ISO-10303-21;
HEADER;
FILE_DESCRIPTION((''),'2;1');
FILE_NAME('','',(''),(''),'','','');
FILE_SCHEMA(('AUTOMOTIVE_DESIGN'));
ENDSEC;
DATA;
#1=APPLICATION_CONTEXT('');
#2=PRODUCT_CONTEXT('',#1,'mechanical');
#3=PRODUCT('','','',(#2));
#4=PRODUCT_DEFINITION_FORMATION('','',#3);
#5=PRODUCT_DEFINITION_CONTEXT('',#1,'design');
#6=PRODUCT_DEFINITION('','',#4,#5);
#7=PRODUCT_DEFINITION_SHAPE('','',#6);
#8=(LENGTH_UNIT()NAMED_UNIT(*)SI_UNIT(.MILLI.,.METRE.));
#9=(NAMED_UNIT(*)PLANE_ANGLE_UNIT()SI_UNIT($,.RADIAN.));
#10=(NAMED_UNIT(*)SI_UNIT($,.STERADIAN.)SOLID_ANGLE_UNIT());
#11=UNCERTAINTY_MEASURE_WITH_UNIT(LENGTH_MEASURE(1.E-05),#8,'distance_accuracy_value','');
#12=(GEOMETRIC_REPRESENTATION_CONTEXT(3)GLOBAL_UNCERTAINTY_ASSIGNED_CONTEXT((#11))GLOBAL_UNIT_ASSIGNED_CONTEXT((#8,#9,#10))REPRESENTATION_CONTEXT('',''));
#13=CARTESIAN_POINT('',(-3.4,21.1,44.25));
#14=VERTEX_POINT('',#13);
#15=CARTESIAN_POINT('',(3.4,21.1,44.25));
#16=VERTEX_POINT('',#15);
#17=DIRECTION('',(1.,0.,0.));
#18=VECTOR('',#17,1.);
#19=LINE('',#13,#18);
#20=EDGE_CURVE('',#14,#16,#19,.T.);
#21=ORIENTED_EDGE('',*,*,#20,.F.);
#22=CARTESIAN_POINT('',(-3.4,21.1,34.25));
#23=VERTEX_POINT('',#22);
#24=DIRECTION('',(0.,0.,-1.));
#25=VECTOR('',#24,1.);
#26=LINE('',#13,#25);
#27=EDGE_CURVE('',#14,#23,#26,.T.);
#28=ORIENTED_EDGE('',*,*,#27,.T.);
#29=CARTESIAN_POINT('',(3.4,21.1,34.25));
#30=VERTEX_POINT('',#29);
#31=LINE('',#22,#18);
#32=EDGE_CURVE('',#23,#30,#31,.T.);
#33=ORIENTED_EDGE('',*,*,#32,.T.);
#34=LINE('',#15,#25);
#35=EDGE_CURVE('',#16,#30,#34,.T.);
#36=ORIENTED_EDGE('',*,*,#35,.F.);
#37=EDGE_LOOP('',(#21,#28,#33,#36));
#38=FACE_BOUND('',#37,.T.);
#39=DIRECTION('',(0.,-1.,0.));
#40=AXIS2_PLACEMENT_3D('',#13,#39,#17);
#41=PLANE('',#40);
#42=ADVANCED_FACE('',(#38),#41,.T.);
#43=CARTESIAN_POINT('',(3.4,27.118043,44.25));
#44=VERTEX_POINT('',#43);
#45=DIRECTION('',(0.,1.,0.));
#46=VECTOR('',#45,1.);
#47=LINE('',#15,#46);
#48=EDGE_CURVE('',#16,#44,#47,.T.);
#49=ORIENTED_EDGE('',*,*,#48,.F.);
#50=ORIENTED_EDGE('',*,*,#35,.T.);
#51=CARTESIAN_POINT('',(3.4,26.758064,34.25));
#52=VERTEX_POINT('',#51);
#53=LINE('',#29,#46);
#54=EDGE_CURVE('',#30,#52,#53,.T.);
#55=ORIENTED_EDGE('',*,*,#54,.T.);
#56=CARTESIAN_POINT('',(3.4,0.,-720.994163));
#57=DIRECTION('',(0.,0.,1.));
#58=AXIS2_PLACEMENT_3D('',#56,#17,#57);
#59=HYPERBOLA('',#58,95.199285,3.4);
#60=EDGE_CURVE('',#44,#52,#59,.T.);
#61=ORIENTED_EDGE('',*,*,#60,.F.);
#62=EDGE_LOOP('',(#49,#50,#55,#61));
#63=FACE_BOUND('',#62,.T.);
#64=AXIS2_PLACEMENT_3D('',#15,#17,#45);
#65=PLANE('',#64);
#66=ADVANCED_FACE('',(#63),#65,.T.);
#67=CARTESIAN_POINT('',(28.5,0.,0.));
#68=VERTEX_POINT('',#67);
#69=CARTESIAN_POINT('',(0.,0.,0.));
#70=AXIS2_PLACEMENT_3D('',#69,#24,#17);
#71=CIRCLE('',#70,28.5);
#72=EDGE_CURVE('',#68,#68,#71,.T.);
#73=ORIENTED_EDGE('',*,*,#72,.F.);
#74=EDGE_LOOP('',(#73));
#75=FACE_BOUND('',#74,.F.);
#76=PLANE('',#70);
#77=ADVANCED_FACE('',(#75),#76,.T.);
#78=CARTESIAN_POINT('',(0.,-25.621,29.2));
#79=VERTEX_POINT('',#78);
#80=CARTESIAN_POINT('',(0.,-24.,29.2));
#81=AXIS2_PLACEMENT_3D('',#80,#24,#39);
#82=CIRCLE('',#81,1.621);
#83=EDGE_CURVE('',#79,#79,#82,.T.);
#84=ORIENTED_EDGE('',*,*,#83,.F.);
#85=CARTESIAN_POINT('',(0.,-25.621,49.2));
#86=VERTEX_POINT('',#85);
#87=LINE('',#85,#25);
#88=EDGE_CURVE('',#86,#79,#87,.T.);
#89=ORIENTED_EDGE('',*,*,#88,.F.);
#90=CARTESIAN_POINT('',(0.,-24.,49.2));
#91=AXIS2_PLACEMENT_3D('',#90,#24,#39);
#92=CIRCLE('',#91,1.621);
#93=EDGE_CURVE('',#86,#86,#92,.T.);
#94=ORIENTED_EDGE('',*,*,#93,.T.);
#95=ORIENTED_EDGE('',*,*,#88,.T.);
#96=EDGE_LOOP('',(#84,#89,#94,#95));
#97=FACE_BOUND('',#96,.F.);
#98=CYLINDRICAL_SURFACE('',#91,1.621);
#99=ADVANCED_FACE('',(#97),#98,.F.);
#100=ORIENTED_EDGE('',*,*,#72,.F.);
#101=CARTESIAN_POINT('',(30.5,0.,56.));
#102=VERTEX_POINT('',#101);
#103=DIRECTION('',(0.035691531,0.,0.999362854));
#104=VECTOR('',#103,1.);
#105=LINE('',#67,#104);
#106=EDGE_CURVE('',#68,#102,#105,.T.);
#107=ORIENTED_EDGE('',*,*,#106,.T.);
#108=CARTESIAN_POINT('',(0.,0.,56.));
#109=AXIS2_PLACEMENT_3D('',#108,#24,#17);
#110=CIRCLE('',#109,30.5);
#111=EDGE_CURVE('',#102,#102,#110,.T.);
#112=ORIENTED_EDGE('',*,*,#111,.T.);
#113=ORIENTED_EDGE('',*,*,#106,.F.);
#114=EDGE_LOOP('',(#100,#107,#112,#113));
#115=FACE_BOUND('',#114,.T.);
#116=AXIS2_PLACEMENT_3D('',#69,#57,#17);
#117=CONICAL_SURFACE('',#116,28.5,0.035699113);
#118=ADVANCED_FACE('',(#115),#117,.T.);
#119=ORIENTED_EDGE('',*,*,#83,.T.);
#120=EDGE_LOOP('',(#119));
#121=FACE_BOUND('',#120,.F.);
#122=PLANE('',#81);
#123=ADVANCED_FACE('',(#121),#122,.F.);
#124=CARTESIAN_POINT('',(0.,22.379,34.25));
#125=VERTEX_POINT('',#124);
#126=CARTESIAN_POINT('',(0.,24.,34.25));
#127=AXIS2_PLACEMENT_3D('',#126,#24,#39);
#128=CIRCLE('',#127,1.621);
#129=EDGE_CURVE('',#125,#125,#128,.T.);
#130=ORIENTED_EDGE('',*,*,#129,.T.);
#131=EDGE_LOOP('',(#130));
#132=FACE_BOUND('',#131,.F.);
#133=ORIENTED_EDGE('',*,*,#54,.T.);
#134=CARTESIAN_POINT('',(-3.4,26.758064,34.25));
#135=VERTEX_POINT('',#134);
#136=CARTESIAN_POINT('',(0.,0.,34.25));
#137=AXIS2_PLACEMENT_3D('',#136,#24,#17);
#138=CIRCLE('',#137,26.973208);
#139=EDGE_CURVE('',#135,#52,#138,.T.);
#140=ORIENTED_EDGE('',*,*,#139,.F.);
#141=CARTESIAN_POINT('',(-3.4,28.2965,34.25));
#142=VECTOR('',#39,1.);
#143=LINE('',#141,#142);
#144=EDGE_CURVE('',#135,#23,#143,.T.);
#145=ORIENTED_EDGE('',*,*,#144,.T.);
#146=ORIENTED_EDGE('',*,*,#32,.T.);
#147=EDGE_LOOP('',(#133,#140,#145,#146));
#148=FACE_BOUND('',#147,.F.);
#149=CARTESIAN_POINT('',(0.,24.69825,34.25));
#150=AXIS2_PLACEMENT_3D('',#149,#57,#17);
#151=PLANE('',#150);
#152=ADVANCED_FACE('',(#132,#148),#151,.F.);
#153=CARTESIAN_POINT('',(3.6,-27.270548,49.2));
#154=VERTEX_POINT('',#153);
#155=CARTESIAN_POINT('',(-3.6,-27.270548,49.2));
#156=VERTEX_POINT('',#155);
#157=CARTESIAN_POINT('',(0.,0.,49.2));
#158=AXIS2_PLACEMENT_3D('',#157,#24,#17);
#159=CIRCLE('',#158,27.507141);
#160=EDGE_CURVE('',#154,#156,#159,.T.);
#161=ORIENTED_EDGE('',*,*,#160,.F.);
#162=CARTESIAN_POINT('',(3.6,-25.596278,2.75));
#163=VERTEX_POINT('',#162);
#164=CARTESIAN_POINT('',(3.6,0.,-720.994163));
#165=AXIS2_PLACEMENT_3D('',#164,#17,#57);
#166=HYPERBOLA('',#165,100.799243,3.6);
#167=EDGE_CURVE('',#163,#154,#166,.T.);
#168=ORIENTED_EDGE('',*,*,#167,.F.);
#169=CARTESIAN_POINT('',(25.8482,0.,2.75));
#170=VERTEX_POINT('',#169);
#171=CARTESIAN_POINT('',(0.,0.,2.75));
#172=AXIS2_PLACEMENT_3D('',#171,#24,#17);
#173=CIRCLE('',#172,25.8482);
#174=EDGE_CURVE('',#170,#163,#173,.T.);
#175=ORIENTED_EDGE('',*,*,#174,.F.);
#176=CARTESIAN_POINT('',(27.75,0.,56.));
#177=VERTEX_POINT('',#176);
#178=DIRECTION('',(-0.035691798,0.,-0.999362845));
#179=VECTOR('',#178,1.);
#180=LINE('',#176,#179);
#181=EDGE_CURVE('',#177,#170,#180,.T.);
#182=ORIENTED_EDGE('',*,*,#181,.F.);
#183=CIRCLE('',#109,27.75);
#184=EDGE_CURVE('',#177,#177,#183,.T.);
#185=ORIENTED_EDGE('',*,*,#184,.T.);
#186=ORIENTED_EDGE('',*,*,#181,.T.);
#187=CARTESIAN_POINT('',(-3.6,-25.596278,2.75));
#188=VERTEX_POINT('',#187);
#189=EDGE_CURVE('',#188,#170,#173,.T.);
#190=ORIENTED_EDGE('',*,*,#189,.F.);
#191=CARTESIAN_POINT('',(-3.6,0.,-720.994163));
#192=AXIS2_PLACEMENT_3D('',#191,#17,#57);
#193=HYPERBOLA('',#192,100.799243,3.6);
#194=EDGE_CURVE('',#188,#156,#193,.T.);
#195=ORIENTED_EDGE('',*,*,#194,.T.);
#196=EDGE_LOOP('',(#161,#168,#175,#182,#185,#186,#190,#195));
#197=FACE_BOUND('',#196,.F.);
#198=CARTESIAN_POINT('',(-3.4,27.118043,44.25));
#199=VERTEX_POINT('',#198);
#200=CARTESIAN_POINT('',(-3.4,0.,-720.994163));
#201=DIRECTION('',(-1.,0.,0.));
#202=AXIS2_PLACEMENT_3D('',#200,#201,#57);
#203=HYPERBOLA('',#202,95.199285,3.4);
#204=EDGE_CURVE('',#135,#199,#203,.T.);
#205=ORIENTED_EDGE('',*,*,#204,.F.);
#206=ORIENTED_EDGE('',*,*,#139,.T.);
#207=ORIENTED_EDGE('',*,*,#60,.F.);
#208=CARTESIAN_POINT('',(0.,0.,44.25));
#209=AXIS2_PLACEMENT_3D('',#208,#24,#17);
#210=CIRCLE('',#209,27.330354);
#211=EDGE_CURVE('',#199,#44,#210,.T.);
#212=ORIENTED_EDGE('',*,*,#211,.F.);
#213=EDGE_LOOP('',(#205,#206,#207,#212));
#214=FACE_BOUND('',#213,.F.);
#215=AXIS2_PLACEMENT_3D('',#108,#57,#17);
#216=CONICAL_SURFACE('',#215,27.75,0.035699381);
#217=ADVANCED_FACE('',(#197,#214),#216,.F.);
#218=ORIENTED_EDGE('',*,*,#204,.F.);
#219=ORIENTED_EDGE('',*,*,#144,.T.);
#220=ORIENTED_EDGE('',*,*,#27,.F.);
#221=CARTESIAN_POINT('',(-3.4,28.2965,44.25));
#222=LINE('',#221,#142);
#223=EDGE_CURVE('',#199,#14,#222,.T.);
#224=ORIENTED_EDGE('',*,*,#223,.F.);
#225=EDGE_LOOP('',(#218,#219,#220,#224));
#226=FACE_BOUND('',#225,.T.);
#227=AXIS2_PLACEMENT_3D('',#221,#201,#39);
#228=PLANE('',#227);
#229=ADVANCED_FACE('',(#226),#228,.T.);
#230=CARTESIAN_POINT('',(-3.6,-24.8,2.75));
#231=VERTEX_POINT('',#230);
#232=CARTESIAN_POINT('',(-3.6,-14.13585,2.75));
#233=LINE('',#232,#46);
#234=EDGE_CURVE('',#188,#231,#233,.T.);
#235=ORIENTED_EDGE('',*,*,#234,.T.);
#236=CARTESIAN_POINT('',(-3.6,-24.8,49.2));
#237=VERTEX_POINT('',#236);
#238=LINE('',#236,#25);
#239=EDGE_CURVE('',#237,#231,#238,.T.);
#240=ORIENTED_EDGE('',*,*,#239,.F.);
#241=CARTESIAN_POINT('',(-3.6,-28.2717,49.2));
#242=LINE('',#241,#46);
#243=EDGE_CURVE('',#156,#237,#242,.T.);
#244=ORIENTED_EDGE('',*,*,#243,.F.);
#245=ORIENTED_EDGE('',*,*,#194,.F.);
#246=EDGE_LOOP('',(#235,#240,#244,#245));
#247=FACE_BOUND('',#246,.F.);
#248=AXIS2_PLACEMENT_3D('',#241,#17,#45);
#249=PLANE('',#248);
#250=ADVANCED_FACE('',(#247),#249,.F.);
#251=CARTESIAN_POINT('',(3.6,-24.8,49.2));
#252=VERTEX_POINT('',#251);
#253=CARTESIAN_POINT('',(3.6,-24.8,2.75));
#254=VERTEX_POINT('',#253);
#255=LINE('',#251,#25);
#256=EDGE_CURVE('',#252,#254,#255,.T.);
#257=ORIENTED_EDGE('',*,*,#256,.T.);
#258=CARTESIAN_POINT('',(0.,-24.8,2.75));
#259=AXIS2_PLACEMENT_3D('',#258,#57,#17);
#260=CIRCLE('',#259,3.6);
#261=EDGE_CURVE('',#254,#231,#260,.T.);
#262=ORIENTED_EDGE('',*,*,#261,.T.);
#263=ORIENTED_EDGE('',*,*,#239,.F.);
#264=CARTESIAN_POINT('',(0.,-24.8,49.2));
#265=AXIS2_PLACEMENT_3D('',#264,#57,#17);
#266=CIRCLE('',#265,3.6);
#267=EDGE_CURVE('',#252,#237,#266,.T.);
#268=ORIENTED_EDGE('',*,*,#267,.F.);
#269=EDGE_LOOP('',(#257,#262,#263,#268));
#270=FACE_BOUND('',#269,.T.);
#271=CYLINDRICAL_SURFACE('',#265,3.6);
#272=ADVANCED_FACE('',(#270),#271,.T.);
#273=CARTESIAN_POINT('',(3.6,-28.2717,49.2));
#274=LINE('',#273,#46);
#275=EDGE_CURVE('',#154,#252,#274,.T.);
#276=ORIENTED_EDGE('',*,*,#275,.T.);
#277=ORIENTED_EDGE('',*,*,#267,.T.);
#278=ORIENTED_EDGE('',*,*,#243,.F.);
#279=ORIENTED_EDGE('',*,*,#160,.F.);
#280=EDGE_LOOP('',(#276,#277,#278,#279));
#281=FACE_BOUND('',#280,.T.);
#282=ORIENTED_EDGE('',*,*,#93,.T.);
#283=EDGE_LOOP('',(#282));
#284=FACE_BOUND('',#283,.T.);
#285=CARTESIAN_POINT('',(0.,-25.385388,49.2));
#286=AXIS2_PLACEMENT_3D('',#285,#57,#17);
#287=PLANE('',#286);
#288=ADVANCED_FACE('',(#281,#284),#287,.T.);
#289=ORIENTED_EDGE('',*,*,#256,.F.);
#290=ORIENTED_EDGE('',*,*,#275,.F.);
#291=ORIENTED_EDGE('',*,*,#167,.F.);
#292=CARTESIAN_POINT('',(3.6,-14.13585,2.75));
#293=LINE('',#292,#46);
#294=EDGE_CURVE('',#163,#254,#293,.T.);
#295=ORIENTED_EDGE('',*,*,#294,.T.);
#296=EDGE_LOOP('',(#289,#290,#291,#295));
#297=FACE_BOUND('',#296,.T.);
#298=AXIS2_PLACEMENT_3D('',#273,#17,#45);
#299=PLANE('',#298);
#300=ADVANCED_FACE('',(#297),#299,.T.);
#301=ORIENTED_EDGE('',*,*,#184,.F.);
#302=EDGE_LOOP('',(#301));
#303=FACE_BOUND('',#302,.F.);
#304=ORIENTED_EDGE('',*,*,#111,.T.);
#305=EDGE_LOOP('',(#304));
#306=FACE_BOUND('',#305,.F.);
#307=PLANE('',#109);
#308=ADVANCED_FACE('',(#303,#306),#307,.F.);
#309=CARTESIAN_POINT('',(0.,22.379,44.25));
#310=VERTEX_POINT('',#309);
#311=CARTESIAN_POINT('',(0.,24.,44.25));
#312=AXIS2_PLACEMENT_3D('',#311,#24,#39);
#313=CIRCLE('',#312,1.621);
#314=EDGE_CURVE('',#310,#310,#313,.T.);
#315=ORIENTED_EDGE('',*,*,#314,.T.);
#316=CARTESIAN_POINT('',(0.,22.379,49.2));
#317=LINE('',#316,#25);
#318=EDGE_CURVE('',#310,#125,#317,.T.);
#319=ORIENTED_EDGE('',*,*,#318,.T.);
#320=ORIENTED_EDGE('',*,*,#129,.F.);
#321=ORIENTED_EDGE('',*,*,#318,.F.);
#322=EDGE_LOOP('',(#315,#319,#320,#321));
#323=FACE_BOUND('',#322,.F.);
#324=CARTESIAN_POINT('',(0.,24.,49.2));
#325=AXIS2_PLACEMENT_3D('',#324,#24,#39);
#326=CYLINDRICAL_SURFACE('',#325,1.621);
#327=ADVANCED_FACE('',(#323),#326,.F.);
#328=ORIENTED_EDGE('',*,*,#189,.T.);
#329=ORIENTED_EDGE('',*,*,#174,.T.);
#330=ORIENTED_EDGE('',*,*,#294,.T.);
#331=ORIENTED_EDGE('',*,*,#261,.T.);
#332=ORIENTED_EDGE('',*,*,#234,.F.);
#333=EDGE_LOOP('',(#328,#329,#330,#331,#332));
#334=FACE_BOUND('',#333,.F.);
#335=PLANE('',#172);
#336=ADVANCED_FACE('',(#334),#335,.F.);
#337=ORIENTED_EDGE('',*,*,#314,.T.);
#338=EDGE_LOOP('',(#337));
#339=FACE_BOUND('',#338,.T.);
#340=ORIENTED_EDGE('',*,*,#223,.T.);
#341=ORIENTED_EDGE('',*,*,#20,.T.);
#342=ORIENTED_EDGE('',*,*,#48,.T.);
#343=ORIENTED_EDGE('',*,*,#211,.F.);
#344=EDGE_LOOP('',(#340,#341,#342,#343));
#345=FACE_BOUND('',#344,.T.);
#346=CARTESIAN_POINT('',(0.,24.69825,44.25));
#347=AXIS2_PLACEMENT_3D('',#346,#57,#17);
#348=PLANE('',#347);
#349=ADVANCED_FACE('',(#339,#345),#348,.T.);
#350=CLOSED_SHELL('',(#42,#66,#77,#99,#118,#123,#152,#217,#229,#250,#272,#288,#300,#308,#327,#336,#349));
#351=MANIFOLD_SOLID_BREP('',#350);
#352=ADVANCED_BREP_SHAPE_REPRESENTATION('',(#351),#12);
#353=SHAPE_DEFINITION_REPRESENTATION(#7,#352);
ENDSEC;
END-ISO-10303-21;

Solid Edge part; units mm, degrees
sketch "Sketch1" plane through (0, 0, 0) normal (0, -1, 0) x (1, 0, 0)
  line L0 (0, 0) -> (28.5, 0)
  line L1 (28.5, 0) -> (30.5, 56)
  line L2 (30.5, 56) -> (27.75, 56)
  line L3 (27.75, 56) -> (25.8482, 2.75)
  line L4 (25.8482, 2.75) -> (0, 2.75)
  line L5 (0, 2.75) -> (0, 0)
  dimension "D1" = 28.5
  dimension "D2" = 30.5
  dimension "D3" = 56
  dimension "D4" = 27.75
revolve "RevolvedProtrusion1" add sketch "Sketch1" angle 360 about axis through (0, 0, 54) along (0, 0, -1)
sketch "Sketch2" plane through (0, 0, 44.25) normal (0, 0, 1) x (1, 0, 0)
  line L0 (-3.4, 28.2965) -> (-3.4, 21.1)
  line L1 (-3.4, 21.1) -> (3.4, 21.1)
  line L2 (3.4, 21.1) -> (3.4, 28.2965)
  line L3 (-3.4, 28.2965) -> (3.4, 28.2965)
  dimension "D1" = 6.8
  dimension "D2" = 9.4
extrude "Ausprägung_1" add sketch "Sketch2" against normal blind 10
sketch "Sketch3" plane through (0, 0, 49.2) normal (0, 0, 1) x (1, 0, 0)
  line L0 (3.6, -28.2717) -> (3.6, -24.8)
  line L1 (-3.6, -28.2717) -> (-3.6, -24.8)
  arc A0 (3.6, -24.8) -> (-3.6, -24.8) centre (0, -24.8) ccw
  line L2 (3.6, -28.2717) -> (-3.6, -28.2717)
  dimension "D1" = 9.3
  dimension "D2" = 7.2
extrude "Ausprägung_2" add sketch "Sketch3" against normal up to next
hole "Bohrung_1" at (0, 24, 49.2) direction (0, 0, -1) diameter 3.242 depth 20 thread major 4 thread length 2
hole "Hole1" at (0, -24, 49.2) direction (0, 0, -1) diameter 3.242 depth 20 thread major 4 thread length 2
